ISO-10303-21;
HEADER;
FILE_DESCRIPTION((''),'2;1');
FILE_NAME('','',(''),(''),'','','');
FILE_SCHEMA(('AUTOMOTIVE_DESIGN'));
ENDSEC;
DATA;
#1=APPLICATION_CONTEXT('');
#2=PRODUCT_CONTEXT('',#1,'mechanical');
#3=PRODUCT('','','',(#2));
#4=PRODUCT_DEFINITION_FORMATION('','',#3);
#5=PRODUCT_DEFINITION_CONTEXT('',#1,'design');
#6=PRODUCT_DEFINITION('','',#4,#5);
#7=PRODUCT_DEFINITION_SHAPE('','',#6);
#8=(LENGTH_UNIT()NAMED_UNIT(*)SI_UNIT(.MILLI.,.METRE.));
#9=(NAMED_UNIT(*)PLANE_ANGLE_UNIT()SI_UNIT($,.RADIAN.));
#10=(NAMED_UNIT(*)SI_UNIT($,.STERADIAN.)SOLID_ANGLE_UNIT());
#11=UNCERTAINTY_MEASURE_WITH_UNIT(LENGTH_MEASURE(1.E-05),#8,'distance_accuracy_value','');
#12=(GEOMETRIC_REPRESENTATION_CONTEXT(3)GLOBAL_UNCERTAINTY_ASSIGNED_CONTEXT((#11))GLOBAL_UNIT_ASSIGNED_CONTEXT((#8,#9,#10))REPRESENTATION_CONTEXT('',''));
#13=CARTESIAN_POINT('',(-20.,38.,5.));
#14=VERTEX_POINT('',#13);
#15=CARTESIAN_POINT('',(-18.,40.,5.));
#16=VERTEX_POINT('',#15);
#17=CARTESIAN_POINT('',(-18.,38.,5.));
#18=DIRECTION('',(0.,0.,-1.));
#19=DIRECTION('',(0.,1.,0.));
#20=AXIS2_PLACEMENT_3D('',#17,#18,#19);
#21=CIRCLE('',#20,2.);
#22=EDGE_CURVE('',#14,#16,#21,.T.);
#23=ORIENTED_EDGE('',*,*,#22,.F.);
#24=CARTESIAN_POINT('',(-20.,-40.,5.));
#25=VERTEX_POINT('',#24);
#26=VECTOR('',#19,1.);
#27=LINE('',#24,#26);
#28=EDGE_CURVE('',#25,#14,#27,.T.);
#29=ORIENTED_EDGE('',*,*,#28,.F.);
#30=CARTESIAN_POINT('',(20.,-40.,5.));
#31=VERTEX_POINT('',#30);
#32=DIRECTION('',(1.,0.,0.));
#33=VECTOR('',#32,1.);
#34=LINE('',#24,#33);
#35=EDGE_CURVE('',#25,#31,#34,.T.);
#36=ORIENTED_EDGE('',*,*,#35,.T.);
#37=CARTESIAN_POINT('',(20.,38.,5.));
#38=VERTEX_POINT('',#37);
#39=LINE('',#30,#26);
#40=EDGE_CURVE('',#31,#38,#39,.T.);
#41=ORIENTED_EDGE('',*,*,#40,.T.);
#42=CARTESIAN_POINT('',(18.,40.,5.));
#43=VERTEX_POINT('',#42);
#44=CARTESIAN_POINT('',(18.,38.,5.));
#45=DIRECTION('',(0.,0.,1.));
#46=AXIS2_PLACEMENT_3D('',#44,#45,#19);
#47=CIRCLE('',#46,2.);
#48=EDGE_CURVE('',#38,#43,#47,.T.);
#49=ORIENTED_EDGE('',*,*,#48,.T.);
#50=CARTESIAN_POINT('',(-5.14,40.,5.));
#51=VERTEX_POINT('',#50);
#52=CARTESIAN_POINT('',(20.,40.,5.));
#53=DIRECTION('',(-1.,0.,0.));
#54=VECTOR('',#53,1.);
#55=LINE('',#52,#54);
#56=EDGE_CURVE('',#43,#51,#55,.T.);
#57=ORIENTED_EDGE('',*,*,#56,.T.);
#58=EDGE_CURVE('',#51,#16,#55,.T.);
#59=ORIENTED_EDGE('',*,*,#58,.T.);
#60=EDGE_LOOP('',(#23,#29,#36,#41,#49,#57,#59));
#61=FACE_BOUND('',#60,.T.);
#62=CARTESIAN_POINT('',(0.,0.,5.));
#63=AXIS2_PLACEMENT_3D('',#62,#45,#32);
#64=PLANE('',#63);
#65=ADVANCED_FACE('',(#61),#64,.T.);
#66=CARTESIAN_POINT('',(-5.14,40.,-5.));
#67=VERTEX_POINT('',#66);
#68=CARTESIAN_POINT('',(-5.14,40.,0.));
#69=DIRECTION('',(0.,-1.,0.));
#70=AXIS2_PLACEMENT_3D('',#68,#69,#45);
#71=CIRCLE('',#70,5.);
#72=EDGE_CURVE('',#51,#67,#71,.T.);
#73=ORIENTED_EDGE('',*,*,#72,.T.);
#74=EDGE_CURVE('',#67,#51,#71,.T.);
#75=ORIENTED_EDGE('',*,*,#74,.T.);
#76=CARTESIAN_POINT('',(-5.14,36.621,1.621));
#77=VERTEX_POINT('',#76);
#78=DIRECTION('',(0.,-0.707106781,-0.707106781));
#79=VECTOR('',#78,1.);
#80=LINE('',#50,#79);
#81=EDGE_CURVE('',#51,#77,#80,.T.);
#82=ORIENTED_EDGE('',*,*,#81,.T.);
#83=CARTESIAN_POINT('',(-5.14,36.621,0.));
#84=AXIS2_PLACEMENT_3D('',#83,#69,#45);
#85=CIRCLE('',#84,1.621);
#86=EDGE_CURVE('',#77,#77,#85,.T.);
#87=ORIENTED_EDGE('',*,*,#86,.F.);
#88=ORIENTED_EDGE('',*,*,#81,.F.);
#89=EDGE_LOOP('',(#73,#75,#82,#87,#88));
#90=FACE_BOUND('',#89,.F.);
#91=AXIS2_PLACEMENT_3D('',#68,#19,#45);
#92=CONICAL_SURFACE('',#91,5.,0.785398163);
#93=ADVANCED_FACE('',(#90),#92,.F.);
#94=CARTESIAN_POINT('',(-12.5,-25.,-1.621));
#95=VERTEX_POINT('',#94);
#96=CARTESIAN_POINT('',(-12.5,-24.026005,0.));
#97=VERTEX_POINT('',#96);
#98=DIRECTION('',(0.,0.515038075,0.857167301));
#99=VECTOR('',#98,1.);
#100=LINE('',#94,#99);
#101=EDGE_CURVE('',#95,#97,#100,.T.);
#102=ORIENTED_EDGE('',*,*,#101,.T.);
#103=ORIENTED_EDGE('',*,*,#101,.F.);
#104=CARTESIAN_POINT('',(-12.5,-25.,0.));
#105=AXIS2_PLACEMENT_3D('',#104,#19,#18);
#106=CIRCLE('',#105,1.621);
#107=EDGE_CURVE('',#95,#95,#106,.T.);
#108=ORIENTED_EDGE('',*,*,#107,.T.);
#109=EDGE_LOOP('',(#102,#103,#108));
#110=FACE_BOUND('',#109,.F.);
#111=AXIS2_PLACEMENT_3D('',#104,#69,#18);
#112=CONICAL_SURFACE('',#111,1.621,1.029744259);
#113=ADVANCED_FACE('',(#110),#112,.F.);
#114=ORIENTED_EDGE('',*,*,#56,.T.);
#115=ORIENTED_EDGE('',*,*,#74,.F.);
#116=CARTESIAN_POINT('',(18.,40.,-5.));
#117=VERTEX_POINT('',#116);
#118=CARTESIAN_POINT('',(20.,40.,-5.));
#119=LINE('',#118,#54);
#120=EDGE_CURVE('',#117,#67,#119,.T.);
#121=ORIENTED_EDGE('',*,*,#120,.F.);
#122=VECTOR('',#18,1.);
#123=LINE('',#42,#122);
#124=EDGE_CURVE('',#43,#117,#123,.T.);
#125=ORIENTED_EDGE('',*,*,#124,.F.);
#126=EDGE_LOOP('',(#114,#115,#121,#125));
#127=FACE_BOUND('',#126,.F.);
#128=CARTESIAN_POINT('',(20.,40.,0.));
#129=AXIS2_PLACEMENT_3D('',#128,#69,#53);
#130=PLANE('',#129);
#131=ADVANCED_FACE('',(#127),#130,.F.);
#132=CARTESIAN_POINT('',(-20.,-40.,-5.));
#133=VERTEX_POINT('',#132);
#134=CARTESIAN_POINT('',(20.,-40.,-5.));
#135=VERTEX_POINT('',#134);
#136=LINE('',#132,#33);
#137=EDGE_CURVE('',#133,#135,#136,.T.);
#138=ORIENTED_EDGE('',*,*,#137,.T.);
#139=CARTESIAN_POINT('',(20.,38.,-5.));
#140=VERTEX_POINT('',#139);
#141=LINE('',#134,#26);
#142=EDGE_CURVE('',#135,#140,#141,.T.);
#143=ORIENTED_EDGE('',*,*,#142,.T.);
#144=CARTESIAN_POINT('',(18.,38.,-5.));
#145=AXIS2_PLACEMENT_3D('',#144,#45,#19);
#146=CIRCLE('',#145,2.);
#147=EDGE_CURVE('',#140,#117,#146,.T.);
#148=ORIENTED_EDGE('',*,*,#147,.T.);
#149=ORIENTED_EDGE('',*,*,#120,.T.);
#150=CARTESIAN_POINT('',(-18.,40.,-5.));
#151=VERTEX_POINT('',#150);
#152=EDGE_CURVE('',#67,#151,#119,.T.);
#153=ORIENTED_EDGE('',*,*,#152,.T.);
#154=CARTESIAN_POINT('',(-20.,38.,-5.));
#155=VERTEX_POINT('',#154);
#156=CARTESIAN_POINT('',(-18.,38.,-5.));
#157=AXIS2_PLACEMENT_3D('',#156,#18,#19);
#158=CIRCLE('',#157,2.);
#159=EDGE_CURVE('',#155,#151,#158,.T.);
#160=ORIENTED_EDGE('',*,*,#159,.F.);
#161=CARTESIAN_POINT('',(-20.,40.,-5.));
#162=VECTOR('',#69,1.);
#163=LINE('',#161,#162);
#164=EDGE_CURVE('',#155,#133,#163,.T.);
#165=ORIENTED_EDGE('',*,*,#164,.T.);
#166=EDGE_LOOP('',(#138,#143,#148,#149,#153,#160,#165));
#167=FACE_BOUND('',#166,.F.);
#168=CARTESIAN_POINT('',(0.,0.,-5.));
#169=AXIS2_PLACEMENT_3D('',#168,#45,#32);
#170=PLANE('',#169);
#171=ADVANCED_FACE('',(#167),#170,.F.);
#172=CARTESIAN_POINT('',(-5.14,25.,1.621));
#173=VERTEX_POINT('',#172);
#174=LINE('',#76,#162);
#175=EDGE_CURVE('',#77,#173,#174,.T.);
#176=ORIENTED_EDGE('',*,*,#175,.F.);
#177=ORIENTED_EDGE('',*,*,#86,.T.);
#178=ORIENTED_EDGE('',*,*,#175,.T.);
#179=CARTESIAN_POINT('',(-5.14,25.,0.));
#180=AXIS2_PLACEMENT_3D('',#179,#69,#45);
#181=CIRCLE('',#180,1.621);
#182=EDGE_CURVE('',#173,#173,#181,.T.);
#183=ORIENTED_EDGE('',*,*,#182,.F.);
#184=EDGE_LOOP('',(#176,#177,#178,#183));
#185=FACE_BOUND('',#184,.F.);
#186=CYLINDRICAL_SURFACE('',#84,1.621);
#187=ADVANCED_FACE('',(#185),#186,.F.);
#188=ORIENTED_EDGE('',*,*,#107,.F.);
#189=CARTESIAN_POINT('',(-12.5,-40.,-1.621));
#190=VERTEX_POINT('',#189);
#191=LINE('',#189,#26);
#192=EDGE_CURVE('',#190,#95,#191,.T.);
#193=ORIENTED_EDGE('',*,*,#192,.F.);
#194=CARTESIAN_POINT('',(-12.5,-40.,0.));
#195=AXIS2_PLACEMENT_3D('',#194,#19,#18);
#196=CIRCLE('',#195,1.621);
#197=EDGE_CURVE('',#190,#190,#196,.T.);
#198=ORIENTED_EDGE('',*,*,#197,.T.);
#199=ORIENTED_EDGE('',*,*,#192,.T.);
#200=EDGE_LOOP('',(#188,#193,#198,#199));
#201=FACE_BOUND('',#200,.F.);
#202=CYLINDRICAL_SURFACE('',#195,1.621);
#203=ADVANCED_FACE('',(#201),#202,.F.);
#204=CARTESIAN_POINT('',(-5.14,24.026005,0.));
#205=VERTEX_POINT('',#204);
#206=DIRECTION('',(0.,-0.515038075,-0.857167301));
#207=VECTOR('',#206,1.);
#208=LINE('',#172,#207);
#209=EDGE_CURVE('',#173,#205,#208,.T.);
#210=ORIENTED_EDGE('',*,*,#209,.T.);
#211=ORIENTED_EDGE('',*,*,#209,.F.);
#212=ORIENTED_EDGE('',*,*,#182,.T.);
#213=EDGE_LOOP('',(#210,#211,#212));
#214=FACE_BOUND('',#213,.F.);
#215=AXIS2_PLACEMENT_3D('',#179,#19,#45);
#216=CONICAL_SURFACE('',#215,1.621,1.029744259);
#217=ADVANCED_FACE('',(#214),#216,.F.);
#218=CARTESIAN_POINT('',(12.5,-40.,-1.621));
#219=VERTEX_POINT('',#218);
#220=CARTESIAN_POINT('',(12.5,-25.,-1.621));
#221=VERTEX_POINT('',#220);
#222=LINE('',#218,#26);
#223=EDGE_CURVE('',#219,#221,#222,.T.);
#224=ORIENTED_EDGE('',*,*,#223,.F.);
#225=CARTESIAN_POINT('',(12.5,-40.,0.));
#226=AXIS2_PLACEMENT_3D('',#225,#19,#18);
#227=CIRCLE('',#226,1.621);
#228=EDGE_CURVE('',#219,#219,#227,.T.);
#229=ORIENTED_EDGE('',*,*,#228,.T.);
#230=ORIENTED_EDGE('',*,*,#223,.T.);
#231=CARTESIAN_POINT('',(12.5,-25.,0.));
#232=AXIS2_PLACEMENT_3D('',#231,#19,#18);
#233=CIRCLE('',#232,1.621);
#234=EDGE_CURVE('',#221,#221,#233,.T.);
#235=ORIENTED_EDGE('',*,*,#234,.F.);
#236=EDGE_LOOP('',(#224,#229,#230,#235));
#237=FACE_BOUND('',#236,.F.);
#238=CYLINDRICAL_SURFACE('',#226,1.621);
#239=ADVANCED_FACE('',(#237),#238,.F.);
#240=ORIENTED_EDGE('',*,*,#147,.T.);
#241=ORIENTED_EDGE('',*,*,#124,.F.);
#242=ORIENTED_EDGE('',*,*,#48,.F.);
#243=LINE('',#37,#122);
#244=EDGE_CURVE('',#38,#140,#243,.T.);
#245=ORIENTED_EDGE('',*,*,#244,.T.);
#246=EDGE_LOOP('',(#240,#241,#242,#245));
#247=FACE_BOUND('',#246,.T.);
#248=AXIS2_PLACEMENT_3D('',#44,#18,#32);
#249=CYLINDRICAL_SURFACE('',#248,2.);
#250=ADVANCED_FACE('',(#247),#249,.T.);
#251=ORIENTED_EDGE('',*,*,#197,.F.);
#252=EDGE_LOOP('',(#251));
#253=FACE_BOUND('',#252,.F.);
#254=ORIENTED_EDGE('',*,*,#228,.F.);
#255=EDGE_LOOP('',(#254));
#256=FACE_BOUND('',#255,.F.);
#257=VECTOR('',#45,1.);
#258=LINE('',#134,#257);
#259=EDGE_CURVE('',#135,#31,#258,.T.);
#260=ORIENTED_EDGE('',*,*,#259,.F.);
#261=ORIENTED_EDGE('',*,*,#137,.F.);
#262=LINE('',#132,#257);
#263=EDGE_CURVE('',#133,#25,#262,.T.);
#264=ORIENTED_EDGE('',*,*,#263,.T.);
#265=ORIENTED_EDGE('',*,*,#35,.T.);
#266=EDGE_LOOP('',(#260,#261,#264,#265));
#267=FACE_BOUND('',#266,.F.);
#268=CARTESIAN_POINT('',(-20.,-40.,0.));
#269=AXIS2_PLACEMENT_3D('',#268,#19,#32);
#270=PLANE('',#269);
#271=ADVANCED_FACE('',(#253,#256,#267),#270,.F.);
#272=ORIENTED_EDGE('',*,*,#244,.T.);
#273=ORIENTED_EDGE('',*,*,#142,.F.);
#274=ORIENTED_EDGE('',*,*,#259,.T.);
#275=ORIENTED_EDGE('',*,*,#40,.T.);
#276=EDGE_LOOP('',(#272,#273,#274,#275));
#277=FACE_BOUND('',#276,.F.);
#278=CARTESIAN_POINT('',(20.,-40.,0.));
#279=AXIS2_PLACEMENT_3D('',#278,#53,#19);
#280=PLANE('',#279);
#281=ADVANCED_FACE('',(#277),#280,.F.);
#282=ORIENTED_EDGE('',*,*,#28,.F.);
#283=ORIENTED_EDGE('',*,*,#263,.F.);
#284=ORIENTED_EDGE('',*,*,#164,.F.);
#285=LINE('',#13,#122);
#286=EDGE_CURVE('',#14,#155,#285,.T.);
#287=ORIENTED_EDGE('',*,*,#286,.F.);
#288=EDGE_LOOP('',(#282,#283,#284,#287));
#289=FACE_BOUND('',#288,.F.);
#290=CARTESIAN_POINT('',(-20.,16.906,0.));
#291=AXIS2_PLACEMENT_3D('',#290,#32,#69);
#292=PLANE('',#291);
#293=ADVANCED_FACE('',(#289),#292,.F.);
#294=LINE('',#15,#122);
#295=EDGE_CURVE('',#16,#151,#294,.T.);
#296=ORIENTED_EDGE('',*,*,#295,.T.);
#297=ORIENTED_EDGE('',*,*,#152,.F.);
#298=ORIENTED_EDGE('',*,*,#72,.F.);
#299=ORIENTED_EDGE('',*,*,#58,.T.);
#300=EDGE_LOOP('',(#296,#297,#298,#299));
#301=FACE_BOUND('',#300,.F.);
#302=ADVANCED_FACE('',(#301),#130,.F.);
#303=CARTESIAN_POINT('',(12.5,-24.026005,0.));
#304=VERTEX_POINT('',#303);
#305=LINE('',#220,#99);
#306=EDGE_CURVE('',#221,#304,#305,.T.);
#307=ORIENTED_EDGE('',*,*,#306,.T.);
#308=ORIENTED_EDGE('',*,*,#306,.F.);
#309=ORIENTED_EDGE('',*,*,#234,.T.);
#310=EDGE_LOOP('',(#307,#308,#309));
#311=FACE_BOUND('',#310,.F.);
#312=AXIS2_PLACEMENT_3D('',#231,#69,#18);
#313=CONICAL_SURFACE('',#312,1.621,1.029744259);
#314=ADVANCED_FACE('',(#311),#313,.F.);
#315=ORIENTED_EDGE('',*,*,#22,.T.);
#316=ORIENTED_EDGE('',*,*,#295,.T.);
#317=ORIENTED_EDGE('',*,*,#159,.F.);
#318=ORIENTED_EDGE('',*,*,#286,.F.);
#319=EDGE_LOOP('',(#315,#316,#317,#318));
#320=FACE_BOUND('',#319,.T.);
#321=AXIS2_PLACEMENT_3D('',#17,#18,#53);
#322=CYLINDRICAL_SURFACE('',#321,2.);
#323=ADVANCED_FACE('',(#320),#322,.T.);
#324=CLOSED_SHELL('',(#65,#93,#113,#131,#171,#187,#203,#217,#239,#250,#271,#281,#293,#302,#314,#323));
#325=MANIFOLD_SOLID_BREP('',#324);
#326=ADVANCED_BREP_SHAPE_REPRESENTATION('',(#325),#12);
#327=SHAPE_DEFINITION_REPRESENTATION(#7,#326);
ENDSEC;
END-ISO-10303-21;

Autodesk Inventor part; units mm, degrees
ref_plane "YZ Plane" through (0, 0, 0) normal (1, 0, 0) x (0, 1, 0)
ref_plane "XZ Plane" through (0, 0, 0) normal (0, 1, 0) x (-1, 0, 0)
ref_plane "XY Plane" through (0, 0, 0) normal (0, 0, 1) x (1, 0, 0)
sketch "Esboço1" plane through (0, 0, 0) normal (0, 0, 1) x (1, 0, 0)
  line L0 (-20, -40) -> (20, -40)
  line L1 (20, -40) -> (20, 40)
  line L2 (20, 40) -> (-20, 40)
  line L3 (-20, 40) -> (-20, -40)
  line L4 (-20, 40) -> (20, 40)
  circle A0 centre (0, 30) radius 5 construction
  circle A1 centre (0, 30) radius 28 construction
  circle A2 centre (0, 30) radius 74 construction
  line L5 (-20, 10.4041) -> (20, 10.4041) construction
  line L6 (-20, -44) -> (20, -44) construction
  line L7 (-103.6, 0) -> (103.6, 0) construction
  line L8 (0, -73.6) -> (0, 133.6) construction
  line L9 (-20, 16.906) -> (20, 40)
  point P0 (0, 0)
  dimension "d0" = 80
  dimension "d1" = 40
  dimension "d41" = 10
  dimension "d42" = 70
  dimension "d43" = 56
  dimension "d45" = 84
  dimension "d49" = 30
  dimension "d58" = 10
extrude "Extrusão1" add sketch "Esboço1" along normal mid plane 10
extrude "Extrusão4" [suppressed]
sketch "Esboço2" plane through (-20, -40, -5) normal (0, -1, 0) x (1, 0, 0)
  line L0 (40, 10) -> (40, 0)
  line L1 (40, 5) -> (0, 5) construction
  line L2 (0, 0) -> (0, 10)
  line L3 (0, 0) -> (0, 10) projected
  line L4 (40, 0) -> (40, 10) projected
  line L5 (0, 10) -> (40, 10) construction
  line L6 (20, 10) -> (20, 0) construction
  line L7 (40, 0) -> (0, 0) construction
  point P0 (20, 5)
  point P1 (7.5, 5)
  point P2 (32.5, 5)
  dimension "d9" = 7.5
  dimension "d10" = 7.5
  dimension "d37" = 25
hole "Furo1" at (-12.5, -40, 0) at (12.5, -40, 0) direction (0, 1, 0) diameter 3.242 depth 15 tip angle 118 thread size "M4x0.7" class "6H" standard "ISO Metric profile"
sketch "Esboço3" plane through (0, 0, 5) normal (0, 0, 1) x (1, 0, 0)
  point P0 (0, 0)
  point P1 (0, 37.5)
  point P2 (0, 30)
hole "Furo2" [suppressed]
sketch "Esboço6" plane through (20, 40, 5) normal (-0.5, 0.8660254, 0) x (0.8660254, 0.5, 0)
  line L0 (0, 0) -> (0, 10) construction
  line L1 (0, 5) -> (-46.188, 5) construction
  line L2 (-46.188, 0) -> (-46.188, 10) construction
  line L3 (-23.094, 5) -> (-23.094, 0) construction
  point P0 (-37.3205, 5)
  point P1 (-33.094, 5)
  point P2 (-13.094, 5)
  dimension "d50" = 20
hole "Furo3" [suppressed]
sketch "Esboço7" plane through (-20, 40, 5) normal (0, 1, 0) x (1, 0, 0)
  line L0 (-8, 5) -> (48, 5) construction
  line L1 (20, 12) -> (20, -2) construction
  line L2 (0, 10) -> (0, 0) projected
  point P0 (20, 5)
  point P1 (14.86, 5)
  dimension "d59" = 14.86
hole "Furo4" at (-5.14, 40, 0) direction (0, -1, 0) diameter 3.242 depth 15 tip angle 118 countersink diameter 10 countersink angle 90 thread size "M4x0.7" class "6H" standard "ISO Metric profile"
fillet "Arredondamento3" radius 2 2 edges at (20, 40, 0) (-20, 40, 0)
properties part number "GRJ-03-116B" material "Fenolite OR"
